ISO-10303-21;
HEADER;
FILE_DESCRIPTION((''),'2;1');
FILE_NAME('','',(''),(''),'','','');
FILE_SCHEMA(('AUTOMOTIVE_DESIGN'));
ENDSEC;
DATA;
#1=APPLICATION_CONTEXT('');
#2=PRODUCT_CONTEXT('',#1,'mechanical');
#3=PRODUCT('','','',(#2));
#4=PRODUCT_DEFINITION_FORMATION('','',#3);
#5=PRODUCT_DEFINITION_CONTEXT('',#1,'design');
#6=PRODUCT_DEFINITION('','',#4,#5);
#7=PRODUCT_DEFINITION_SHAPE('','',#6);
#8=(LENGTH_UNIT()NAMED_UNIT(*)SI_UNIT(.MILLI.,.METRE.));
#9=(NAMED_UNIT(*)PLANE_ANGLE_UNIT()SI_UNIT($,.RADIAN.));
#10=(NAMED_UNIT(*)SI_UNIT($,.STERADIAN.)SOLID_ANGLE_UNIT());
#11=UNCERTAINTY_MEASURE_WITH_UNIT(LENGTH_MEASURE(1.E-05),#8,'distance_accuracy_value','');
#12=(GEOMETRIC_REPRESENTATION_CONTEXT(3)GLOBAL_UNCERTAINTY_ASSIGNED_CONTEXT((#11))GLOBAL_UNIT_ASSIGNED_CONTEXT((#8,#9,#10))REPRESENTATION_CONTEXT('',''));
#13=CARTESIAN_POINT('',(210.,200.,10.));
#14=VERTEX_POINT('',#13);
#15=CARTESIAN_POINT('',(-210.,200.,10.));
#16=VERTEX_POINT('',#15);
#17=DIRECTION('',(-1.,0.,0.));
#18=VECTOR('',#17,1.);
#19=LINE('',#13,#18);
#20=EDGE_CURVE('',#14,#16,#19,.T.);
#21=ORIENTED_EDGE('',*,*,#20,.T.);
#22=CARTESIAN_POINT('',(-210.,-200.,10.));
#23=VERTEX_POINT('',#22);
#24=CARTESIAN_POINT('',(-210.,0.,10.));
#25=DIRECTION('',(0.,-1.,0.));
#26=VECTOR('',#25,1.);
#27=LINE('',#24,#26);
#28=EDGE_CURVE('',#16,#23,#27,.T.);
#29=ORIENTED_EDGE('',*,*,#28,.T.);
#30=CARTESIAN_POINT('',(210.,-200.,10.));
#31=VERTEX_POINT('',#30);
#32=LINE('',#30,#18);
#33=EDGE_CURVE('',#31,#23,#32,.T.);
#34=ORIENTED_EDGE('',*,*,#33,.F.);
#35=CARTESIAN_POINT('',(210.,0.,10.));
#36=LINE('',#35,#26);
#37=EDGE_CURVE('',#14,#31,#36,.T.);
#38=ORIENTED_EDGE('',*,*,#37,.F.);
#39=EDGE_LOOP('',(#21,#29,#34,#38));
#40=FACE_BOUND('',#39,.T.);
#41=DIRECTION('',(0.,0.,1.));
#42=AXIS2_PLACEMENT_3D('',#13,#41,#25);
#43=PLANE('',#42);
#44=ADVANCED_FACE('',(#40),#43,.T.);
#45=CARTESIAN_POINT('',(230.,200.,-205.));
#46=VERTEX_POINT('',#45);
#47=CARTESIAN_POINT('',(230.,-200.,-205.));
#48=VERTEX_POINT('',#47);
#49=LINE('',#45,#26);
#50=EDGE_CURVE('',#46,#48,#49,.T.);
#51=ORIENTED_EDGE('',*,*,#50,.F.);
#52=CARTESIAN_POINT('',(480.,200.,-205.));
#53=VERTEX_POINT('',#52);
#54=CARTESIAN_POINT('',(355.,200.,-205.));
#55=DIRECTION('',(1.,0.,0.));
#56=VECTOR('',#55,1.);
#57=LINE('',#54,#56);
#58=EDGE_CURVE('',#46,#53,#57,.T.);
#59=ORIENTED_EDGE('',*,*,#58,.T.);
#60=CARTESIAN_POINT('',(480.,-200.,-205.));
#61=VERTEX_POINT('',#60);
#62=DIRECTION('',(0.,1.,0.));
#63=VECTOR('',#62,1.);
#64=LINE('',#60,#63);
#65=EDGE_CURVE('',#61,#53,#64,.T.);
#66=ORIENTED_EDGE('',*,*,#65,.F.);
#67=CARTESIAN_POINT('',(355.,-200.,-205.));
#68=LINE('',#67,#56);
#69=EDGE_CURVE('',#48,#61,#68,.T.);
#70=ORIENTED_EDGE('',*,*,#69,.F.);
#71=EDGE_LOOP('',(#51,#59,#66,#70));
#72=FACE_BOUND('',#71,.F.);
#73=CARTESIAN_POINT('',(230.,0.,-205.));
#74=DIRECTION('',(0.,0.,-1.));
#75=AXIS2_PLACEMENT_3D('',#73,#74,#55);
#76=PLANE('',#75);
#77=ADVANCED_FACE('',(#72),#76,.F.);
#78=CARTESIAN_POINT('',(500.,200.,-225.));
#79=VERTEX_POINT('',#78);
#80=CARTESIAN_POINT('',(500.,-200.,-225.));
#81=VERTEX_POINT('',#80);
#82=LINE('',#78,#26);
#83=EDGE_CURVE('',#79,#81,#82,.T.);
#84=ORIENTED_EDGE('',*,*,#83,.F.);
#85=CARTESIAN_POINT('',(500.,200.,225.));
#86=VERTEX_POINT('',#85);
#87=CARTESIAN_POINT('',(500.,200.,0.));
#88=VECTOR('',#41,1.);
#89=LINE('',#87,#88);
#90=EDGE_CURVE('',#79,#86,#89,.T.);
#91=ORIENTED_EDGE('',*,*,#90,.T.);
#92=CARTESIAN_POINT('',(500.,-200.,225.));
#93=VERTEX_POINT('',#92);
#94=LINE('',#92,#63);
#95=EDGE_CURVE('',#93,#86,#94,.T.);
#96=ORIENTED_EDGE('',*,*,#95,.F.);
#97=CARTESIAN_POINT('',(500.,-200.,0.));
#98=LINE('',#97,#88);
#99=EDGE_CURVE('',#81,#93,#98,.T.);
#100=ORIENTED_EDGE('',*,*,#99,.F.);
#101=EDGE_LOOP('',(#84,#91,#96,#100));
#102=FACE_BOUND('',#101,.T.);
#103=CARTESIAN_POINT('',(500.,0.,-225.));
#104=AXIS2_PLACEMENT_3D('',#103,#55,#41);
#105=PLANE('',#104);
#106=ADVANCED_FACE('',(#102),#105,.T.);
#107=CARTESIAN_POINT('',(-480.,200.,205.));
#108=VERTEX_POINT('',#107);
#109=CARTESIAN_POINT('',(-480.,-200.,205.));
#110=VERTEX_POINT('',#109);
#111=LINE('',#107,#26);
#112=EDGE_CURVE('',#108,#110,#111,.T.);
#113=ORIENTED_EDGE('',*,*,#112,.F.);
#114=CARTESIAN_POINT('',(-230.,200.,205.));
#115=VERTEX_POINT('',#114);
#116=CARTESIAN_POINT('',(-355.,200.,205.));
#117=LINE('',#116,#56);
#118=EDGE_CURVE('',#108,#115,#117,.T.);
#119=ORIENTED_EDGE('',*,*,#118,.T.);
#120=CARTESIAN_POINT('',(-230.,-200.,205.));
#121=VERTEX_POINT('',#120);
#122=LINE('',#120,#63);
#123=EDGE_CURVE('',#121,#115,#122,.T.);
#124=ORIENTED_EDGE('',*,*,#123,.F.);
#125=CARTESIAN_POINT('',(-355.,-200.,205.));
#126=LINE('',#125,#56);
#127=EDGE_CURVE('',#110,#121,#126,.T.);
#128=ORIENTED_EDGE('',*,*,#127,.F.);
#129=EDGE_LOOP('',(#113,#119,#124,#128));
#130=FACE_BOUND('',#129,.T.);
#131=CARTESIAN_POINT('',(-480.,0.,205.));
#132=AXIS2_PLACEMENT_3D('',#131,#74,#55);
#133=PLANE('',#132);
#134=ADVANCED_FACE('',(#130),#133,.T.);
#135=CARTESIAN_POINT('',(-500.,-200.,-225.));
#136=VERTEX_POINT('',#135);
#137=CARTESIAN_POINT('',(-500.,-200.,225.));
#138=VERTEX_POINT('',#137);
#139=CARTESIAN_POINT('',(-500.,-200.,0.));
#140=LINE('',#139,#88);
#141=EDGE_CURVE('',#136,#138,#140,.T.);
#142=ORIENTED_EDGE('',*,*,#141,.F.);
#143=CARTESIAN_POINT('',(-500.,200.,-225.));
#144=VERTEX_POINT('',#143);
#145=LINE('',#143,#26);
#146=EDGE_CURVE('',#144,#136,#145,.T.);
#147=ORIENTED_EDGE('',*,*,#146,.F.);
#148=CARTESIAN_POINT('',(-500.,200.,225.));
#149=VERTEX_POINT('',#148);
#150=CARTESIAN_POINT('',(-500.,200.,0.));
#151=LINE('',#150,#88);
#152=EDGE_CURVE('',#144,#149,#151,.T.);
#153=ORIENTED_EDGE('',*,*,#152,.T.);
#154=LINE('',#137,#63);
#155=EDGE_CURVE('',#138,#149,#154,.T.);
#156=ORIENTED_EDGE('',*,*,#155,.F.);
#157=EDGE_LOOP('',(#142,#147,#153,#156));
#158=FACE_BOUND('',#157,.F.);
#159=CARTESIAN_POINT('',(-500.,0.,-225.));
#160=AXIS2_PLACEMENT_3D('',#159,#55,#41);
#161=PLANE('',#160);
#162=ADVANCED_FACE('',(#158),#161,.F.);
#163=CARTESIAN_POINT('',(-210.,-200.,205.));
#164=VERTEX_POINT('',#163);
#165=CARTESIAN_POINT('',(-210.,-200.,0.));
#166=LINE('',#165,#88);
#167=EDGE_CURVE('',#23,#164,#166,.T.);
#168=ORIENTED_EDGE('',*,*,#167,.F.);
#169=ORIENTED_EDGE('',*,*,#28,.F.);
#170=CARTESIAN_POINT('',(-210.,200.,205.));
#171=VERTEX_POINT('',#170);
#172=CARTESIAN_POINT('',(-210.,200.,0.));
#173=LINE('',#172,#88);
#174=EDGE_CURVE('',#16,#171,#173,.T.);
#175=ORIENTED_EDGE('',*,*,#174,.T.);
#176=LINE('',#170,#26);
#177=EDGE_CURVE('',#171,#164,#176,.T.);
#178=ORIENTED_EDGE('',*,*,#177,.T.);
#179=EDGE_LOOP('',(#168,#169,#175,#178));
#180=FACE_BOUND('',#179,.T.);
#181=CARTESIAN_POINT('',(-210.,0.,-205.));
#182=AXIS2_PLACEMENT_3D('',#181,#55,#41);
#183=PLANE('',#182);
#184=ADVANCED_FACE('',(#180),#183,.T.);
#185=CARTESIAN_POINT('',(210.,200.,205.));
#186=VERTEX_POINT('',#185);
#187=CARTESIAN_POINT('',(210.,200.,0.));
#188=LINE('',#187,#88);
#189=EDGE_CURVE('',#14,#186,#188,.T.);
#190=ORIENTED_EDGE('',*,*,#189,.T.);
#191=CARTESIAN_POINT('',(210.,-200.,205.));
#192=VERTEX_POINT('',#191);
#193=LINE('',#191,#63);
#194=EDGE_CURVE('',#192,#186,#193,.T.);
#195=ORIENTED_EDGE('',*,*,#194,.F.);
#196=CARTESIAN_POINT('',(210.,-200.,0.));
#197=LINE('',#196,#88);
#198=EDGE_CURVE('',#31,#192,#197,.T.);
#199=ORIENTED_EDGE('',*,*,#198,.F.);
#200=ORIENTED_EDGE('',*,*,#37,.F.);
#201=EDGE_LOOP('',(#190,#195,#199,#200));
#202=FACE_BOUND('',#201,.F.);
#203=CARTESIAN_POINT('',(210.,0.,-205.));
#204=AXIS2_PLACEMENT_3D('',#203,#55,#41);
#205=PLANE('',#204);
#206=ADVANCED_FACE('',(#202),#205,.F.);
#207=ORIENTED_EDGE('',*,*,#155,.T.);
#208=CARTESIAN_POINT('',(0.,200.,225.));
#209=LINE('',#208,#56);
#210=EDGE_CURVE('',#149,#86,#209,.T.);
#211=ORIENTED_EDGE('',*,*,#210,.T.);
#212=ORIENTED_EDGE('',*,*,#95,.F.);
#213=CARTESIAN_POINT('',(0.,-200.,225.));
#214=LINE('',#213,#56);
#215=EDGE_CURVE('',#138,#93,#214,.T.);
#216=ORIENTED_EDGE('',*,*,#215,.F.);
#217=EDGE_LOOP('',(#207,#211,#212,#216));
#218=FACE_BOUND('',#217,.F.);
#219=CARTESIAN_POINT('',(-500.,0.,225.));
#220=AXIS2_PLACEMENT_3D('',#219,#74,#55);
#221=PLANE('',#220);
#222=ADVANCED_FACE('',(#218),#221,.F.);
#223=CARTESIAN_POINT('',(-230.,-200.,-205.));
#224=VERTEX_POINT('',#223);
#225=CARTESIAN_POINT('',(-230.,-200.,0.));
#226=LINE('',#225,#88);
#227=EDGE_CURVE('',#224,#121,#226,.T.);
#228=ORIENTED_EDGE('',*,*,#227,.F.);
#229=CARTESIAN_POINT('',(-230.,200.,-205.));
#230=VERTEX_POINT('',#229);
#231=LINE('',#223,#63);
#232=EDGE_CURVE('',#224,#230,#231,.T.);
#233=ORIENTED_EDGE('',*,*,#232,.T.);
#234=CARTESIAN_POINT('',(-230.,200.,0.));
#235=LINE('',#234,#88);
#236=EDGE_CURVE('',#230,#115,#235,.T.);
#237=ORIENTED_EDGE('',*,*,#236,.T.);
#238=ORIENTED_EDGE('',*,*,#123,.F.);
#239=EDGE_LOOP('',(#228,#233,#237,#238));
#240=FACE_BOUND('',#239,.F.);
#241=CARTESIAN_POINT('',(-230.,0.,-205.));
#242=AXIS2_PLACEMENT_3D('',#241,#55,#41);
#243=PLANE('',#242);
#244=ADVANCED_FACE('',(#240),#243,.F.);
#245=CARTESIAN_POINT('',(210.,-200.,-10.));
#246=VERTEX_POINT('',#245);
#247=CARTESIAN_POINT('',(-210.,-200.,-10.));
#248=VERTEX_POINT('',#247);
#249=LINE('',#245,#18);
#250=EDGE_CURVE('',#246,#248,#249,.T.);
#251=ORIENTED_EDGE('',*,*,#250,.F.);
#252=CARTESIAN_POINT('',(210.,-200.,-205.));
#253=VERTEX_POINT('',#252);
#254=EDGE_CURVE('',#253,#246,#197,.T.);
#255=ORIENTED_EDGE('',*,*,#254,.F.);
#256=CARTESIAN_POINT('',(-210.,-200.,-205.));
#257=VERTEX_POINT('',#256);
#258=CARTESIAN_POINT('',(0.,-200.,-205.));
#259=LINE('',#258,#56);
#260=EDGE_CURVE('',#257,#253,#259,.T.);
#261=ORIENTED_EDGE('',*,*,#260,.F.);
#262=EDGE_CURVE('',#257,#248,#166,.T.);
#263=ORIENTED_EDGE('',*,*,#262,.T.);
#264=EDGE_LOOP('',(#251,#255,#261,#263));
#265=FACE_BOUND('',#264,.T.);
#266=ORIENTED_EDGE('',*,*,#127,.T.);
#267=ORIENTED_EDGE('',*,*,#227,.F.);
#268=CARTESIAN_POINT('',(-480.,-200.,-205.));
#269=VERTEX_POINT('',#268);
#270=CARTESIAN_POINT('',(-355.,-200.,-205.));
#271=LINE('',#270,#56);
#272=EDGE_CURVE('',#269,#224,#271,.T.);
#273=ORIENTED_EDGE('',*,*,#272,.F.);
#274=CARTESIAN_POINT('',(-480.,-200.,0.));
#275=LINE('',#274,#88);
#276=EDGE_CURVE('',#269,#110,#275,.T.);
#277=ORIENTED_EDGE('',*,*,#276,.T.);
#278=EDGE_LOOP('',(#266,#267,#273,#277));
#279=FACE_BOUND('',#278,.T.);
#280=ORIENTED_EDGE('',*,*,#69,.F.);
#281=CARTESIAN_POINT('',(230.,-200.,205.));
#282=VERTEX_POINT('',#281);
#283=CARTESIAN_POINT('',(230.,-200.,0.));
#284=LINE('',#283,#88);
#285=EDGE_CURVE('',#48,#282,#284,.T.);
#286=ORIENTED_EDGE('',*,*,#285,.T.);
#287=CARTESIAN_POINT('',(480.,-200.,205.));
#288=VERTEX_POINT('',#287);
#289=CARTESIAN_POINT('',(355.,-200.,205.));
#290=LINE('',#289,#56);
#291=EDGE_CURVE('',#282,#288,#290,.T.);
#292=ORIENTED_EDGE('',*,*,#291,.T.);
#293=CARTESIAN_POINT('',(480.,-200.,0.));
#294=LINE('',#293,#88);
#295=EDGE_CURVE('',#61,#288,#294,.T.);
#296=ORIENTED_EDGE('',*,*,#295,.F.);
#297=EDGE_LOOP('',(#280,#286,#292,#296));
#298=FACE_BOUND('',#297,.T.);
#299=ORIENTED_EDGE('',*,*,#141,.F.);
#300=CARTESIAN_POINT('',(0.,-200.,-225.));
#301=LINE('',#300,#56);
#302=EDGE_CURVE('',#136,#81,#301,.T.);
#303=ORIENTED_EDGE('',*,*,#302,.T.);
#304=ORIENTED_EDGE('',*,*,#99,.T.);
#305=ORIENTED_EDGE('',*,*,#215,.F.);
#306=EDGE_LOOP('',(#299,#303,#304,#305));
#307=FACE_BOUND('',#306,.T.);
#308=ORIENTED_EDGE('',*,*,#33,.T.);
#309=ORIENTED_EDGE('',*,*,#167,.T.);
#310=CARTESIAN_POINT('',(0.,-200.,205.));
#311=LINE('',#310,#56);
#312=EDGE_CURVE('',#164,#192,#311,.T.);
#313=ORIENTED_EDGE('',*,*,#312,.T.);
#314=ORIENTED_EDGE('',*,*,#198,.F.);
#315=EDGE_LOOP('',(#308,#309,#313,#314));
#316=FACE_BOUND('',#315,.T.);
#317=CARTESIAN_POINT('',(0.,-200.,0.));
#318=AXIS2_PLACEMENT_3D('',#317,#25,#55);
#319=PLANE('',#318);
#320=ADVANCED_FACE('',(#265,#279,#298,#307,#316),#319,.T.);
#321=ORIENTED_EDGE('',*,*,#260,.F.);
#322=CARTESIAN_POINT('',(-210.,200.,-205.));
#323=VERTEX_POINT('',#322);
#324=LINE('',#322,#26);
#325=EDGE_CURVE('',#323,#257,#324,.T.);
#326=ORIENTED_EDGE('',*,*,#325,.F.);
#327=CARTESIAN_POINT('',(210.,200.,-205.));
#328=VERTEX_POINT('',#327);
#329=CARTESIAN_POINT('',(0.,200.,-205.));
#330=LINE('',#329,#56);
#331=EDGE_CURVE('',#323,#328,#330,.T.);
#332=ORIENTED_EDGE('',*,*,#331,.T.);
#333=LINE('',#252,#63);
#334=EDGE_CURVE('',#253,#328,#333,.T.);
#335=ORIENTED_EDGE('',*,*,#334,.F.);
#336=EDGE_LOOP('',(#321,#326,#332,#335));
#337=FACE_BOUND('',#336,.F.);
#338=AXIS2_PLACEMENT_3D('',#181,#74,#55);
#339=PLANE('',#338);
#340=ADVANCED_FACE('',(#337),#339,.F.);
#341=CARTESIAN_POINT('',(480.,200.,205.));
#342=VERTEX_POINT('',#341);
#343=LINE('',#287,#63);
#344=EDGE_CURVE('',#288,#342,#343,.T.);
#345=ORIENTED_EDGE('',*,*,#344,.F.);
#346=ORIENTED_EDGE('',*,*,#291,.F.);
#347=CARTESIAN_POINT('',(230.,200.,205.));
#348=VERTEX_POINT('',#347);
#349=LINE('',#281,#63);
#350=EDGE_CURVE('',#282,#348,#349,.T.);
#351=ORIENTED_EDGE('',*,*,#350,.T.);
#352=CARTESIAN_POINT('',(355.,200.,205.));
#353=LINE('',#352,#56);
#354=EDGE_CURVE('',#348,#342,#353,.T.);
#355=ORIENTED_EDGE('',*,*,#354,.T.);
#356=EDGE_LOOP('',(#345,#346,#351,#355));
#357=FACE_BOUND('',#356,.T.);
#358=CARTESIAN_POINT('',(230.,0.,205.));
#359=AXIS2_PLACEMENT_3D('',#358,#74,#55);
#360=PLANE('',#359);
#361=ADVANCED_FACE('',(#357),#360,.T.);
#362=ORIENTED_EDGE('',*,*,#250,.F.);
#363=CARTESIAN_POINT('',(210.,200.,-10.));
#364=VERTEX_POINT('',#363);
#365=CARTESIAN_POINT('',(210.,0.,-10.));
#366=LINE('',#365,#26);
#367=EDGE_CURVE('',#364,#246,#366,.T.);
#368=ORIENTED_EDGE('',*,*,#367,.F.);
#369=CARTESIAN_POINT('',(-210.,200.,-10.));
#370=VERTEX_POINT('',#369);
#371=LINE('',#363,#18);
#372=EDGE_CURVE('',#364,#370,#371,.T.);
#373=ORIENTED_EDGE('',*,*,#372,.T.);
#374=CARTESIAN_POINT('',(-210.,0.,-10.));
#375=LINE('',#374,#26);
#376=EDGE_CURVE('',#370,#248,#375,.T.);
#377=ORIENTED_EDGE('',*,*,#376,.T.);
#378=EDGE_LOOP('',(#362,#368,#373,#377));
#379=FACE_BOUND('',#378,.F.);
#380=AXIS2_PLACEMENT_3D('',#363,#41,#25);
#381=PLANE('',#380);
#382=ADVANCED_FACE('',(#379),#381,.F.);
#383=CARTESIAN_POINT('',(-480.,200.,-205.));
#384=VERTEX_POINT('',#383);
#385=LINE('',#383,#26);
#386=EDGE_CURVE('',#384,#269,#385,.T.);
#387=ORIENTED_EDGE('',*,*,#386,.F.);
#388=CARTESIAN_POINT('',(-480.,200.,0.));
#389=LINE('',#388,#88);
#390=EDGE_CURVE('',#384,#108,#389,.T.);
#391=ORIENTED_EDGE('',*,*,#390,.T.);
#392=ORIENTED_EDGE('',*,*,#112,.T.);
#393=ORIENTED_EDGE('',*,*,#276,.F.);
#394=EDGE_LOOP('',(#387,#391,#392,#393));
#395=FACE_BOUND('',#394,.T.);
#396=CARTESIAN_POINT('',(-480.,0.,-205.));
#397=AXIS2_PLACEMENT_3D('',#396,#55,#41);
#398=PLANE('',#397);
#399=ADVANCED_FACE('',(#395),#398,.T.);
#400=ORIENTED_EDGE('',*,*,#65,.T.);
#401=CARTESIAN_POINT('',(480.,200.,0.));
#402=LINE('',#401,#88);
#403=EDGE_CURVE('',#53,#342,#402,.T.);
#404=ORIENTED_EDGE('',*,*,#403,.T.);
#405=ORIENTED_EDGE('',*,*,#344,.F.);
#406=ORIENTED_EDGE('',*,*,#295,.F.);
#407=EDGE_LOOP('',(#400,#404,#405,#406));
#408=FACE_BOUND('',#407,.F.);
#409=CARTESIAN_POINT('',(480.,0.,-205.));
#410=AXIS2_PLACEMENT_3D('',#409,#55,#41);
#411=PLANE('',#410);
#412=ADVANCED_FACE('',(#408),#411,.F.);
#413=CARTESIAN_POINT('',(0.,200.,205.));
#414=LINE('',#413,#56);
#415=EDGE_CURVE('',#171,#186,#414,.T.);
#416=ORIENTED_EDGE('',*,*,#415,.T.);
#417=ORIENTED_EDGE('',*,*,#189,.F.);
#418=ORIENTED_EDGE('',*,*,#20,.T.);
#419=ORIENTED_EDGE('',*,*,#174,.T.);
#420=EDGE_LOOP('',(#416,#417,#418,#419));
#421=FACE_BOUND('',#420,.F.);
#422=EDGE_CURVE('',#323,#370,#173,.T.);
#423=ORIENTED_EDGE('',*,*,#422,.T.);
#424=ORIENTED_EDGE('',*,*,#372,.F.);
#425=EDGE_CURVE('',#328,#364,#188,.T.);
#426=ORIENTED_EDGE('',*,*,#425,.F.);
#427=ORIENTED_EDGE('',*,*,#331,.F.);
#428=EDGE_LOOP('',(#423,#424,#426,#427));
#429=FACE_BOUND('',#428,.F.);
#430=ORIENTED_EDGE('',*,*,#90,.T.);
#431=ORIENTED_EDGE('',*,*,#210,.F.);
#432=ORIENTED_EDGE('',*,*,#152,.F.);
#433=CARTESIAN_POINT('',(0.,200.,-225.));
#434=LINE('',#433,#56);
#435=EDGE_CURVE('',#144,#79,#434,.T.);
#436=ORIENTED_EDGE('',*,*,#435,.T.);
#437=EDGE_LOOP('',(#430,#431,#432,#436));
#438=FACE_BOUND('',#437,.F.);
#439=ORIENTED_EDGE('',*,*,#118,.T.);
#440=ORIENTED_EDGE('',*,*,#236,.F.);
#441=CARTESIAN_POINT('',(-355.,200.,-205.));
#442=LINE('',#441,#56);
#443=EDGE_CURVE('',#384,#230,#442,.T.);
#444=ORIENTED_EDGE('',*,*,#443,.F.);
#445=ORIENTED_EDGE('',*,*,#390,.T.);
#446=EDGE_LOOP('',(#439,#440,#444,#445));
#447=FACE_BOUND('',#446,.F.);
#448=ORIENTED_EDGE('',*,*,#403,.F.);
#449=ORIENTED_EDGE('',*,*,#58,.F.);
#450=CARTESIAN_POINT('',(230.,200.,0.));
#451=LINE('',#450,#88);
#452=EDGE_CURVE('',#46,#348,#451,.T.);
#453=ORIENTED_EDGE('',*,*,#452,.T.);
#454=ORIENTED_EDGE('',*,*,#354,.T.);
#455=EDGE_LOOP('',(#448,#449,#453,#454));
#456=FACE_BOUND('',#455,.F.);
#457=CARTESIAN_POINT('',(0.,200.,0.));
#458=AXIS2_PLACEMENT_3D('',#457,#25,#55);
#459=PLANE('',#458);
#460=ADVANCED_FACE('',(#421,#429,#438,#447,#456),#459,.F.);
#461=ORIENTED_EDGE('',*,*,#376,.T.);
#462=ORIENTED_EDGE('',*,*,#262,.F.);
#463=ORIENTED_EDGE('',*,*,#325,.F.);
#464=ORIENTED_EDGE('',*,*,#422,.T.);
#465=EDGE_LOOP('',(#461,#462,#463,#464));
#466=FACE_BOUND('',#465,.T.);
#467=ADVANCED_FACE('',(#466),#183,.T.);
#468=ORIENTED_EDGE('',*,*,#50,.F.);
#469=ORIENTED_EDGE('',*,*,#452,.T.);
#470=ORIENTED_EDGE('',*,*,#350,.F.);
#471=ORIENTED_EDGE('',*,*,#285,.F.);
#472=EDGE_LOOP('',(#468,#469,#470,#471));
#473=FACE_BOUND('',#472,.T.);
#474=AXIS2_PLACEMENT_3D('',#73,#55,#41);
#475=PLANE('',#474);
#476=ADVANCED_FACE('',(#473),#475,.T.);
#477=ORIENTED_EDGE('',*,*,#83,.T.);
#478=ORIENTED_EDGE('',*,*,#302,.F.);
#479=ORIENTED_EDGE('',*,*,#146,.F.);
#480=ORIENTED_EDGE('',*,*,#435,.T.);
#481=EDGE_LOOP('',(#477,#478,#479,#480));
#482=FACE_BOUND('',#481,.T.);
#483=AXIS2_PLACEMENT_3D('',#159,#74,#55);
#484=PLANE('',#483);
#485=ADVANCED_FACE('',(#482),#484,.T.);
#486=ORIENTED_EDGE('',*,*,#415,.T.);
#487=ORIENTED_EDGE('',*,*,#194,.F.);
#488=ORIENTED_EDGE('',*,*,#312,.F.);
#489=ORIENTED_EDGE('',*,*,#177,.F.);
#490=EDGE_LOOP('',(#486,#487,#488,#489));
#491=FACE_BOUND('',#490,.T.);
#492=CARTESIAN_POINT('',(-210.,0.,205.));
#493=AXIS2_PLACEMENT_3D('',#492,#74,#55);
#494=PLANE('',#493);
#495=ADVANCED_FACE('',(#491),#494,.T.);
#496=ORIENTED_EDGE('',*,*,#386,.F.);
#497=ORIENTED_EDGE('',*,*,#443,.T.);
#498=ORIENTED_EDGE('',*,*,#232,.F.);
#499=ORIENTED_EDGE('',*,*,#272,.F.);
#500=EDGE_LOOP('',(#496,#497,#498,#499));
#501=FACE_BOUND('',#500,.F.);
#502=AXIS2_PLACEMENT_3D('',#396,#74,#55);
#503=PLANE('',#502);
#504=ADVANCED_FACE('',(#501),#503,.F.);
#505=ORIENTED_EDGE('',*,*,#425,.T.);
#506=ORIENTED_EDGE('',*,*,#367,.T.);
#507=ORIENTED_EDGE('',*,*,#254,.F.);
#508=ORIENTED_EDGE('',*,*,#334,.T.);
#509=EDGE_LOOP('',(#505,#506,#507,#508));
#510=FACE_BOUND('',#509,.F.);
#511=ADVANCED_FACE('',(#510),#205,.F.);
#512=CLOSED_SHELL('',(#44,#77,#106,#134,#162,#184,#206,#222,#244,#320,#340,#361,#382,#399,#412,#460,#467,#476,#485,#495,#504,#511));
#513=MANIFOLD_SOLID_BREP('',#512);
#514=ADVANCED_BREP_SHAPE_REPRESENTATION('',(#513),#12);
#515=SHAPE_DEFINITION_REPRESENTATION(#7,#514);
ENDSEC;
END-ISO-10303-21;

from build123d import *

# Parameters (mm, degrees)
F0_W     = 1000
F0_H     = 450
F0_W_2   = 250
F0_H_2   = 410
F0_W_3   = 420
F1_DEPTH = 200
F2_W     = 400
F2_H     = 20
F3_DEPTH = 420


# Not quite as in the source:
# - a feature names something its author has since deleted; it is built from what else it names


with BuildPart() as f1:
    # F0 (on Front) → F1 (new body, symmetric)
    with BuildSketch(Plane.XZ):
        Rectangle(F0_W, F0_H)
        with Locations((-355, 0)):
            Rectangle(F0_W_2, F0_H_2, mode=Mode.SUBTRACT)
        Rectangle(F0_W_3, F0_H_2, mode=Mode.SUBTRACT)
        with Locations((355, 0)):
            Rectangle(F0_W_2, F0_H_2, mode=Mode.SUBTRACT)
    extrude(amount=F1_DEPTH, both=True)

    # F2 (on face) → F3 (join, through all)
    with BuildSketch(Plane(origin=(210, 0, 0), x_dir=(0, -1, 0), z_dir=(-1, 0, 0))):
        Rectangle(F2_W, F2_H)
    extrude(amount=F3_DEPTH)


solid = f1.part
